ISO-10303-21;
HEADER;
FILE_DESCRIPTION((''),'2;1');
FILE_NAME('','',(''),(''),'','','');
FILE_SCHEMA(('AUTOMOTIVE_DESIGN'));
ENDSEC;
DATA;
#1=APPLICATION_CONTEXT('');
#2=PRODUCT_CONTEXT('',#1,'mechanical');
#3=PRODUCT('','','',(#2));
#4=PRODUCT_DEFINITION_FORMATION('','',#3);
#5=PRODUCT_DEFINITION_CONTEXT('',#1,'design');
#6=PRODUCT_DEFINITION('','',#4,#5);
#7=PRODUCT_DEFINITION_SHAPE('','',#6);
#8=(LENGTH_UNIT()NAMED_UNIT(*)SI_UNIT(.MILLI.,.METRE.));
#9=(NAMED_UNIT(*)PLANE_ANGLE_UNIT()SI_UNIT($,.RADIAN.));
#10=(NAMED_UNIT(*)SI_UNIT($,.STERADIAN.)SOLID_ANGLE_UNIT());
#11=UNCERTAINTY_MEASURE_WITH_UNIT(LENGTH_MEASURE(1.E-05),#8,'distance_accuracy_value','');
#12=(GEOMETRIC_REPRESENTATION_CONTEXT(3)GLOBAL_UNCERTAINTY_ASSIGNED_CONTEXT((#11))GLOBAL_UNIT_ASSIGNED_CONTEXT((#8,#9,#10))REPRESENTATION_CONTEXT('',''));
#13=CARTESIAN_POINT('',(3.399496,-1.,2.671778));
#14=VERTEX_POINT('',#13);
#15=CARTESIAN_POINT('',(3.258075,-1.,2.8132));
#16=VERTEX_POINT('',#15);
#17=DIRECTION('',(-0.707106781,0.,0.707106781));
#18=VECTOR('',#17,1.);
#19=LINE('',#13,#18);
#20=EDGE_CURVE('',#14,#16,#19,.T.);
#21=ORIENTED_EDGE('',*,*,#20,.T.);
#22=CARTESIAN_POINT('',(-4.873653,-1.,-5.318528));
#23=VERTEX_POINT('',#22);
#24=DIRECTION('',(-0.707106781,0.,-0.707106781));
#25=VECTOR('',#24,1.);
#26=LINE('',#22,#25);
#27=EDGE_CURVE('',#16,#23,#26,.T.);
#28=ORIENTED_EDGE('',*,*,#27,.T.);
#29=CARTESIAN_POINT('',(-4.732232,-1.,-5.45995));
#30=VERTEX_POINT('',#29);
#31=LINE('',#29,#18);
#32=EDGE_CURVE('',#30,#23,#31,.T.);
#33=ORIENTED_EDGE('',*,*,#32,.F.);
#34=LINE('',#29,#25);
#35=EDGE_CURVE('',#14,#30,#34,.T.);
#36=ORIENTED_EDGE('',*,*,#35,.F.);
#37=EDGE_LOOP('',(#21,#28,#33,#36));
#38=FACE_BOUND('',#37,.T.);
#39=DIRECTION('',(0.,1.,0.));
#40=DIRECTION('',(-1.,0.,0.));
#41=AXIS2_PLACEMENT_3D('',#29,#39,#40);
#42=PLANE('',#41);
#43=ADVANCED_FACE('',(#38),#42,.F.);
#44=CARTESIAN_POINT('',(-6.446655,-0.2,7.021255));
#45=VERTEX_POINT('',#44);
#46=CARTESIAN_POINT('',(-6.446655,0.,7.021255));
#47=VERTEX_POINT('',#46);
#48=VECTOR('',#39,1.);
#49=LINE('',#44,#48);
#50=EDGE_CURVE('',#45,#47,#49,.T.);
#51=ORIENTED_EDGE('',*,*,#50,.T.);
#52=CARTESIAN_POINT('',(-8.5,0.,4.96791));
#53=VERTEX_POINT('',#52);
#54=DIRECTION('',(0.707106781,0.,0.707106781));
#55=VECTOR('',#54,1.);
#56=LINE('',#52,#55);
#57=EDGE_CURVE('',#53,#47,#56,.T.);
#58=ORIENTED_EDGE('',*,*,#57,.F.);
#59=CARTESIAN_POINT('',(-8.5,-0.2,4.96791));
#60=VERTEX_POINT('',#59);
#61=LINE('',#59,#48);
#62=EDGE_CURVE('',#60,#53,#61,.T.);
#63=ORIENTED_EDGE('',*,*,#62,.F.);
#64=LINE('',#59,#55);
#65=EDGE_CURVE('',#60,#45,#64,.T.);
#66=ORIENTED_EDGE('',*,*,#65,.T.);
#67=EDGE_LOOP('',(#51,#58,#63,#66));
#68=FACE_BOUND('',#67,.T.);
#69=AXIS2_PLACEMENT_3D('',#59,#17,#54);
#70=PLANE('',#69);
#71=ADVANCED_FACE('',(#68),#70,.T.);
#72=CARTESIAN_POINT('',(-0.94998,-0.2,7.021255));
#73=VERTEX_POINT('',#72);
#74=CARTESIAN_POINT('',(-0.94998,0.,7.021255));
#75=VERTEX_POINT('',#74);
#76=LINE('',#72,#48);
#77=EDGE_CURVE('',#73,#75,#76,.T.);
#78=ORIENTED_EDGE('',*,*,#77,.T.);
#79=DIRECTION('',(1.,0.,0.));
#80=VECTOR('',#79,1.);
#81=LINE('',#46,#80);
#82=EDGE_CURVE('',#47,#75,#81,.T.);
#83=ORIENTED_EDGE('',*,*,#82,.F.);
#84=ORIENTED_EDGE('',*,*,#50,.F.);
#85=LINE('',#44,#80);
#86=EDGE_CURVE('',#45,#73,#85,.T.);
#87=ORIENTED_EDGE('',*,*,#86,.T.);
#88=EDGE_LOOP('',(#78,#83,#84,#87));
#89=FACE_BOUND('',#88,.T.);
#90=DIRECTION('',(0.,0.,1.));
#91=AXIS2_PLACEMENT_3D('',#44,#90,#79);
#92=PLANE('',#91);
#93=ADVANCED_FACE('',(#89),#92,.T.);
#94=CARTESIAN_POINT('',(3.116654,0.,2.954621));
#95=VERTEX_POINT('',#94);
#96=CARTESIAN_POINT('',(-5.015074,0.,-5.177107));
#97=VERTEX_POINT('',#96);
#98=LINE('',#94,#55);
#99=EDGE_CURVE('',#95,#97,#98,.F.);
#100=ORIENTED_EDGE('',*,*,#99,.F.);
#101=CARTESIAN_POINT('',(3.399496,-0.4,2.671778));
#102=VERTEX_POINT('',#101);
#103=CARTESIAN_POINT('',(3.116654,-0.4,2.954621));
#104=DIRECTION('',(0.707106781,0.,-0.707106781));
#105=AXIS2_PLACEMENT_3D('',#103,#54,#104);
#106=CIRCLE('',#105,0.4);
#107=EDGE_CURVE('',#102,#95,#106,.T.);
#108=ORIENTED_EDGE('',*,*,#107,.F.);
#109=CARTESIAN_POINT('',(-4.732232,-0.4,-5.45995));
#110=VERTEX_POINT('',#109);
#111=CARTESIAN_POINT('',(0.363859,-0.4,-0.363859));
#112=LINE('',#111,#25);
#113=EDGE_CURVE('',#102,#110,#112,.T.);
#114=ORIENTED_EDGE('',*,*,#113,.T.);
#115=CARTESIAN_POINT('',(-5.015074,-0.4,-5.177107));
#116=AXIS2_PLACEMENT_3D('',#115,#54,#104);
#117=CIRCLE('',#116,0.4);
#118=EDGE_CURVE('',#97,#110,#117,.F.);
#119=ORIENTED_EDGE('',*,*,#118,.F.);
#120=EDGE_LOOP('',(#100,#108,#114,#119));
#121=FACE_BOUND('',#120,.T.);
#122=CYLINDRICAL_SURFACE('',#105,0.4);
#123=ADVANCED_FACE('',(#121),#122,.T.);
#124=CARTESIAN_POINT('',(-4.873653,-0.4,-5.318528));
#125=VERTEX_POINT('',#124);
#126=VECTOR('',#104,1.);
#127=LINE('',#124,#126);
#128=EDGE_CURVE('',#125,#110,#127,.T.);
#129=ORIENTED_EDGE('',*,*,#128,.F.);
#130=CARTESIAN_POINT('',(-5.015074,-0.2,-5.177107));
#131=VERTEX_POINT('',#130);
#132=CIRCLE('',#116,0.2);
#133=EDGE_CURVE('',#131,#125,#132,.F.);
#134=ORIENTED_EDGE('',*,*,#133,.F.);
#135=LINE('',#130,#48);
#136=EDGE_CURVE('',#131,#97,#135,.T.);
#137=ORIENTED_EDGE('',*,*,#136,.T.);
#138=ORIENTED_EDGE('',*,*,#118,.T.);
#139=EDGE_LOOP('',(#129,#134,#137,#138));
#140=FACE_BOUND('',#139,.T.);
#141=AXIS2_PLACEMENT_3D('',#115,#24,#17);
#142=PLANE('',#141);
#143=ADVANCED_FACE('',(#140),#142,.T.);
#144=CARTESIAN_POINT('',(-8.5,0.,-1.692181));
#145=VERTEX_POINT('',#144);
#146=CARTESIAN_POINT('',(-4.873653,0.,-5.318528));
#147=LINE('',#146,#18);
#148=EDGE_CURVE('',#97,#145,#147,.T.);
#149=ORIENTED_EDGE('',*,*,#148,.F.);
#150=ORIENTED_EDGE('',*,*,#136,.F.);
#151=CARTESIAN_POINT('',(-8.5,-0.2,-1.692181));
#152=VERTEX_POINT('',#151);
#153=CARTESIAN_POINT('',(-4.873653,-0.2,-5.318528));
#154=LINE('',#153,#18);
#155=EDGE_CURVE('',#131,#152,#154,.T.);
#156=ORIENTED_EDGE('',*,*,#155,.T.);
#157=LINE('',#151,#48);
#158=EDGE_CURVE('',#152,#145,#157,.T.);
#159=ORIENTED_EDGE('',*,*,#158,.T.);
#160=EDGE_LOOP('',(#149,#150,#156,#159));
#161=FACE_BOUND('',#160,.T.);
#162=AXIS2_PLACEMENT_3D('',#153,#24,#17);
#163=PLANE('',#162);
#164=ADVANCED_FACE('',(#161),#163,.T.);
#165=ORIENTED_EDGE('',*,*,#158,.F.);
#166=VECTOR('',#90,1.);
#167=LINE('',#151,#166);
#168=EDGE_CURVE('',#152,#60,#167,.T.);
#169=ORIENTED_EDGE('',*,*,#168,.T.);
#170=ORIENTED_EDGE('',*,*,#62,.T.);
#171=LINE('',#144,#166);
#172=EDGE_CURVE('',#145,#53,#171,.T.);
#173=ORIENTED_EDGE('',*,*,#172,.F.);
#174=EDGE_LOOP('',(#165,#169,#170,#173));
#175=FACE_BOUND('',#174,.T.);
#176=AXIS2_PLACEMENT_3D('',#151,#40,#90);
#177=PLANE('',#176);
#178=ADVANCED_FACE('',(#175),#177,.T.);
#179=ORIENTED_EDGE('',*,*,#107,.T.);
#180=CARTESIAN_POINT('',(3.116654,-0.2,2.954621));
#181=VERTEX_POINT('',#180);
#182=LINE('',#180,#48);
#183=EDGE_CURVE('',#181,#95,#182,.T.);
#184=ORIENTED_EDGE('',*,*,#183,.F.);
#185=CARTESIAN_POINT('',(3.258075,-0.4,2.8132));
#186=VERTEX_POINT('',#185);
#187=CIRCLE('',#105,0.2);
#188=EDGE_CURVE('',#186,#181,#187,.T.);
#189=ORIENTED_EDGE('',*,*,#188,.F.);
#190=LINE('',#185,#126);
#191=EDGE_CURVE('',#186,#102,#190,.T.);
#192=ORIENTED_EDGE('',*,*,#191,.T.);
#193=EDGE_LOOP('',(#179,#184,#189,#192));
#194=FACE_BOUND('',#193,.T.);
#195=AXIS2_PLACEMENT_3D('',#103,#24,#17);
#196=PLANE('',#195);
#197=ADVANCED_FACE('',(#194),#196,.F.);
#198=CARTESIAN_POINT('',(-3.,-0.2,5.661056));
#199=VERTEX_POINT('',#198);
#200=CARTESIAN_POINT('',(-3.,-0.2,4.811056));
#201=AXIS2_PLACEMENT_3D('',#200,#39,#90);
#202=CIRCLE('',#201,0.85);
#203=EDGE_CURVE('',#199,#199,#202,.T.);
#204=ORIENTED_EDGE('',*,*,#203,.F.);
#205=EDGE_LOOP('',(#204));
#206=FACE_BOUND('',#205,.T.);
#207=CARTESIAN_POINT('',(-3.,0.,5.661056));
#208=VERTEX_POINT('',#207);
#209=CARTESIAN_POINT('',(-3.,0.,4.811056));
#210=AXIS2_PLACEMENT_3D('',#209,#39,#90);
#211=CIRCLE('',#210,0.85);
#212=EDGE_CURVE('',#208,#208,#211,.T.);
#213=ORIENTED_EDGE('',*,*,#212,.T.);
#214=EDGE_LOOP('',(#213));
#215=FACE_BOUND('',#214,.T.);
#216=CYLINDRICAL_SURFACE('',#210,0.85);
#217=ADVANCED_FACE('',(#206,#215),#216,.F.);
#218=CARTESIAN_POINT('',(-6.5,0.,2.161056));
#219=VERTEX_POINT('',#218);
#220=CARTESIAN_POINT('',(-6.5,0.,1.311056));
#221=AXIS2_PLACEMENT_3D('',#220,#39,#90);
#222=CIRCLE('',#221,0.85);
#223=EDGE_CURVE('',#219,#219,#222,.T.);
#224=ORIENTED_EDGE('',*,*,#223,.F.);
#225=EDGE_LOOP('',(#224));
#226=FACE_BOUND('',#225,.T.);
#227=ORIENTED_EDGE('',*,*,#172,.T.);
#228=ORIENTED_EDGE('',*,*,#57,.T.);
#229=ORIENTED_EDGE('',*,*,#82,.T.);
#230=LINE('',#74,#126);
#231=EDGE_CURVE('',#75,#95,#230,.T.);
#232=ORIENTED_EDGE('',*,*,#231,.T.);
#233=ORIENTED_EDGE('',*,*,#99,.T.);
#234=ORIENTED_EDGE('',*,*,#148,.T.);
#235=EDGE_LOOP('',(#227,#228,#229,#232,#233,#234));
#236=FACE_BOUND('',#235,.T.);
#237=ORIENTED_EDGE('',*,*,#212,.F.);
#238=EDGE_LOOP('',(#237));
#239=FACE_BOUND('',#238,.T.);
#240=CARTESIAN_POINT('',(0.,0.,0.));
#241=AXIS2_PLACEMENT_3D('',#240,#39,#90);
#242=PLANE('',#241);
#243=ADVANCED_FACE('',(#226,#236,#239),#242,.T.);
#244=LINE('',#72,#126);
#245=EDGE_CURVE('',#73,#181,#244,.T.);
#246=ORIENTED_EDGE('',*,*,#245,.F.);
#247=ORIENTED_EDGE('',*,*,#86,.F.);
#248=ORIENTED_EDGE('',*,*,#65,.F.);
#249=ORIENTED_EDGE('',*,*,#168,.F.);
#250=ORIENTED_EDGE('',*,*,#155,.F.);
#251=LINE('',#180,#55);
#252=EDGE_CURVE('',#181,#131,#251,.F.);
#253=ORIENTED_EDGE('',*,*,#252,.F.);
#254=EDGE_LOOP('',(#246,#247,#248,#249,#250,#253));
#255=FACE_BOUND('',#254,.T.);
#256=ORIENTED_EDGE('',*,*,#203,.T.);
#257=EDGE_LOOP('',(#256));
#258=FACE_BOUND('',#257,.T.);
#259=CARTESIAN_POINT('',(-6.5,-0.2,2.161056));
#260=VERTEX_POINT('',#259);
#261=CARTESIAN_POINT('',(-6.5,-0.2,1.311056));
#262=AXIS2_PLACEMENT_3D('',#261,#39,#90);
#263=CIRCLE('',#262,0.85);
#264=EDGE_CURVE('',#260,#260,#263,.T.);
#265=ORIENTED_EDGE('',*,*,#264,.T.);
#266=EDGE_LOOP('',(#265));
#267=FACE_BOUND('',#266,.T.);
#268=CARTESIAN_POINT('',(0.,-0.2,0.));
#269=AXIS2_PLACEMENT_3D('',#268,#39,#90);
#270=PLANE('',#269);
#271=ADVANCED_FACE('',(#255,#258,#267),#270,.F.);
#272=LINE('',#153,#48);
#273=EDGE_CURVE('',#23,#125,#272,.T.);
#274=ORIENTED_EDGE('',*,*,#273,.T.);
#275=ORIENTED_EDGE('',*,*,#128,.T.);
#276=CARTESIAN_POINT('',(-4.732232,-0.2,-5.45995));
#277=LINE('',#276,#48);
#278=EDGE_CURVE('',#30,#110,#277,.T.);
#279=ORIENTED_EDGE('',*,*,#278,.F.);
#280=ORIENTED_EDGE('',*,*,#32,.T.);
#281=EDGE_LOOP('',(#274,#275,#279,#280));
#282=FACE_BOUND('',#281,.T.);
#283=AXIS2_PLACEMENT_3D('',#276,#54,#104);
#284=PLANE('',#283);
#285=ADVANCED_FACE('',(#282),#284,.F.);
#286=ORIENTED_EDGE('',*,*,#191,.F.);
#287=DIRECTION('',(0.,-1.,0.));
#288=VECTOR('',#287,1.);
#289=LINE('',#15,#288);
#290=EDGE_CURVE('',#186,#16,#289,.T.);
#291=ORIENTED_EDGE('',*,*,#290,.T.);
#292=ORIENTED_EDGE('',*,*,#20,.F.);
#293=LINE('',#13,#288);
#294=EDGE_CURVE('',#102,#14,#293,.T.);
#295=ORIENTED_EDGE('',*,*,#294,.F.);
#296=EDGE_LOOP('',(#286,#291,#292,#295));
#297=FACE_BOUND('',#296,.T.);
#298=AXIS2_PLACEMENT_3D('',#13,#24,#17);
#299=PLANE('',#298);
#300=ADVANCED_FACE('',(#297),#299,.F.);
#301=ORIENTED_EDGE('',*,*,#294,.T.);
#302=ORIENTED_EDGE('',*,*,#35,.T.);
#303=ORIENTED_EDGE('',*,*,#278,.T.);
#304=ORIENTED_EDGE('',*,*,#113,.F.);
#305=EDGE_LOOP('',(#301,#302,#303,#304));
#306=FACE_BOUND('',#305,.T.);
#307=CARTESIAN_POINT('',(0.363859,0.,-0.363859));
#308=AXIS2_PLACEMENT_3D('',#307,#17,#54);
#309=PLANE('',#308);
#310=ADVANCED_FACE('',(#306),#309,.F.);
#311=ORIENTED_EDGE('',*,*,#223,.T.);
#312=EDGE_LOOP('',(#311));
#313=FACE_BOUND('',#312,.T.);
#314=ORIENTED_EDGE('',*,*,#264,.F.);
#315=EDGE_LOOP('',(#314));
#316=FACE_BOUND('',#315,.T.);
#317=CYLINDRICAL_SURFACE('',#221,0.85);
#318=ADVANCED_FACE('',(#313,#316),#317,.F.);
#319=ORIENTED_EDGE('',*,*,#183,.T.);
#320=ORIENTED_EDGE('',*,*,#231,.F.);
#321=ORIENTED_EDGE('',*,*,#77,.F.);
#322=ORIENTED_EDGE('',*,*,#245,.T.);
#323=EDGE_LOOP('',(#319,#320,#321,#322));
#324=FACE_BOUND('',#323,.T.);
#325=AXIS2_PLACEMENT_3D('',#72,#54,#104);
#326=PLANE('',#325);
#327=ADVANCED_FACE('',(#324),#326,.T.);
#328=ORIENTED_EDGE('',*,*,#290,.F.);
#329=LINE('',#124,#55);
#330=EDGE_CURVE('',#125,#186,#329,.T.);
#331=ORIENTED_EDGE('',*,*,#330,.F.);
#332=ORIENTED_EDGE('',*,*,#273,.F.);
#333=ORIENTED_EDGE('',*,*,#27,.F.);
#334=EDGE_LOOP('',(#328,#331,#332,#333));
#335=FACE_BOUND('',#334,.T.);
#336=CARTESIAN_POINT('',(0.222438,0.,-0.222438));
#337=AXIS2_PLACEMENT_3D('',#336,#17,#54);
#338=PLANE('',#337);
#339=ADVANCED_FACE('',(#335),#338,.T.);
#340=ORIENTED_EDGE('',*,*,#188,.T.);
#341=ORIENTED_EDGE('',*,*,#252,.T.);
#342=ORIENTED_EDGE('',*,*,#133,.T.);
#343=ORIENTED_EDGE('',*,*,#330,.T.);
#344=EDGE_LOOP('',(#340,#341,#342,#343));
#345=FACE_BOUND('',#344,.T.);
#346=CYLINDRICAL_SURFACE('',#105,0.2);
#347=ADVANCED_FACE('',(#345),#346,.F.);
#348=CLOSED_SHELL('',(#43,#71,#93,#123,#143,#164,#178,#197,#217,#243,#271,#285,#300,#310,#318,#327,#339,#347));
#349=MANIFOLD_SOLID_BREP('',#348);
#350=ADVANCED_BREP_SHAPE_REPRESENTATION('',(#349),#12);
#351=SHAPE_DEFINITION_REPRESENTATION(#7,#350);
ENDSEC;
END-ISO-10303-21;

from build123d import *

# Parameters (mm, degrees)
BASE_FLANGE1_DEPTH           = 0.2
EDGE_FLANGE1_STRIP_W         = 1.2
EDGE_FLANGE1_STRIP_H         = 0.2
EDGE_FLANGE1_STRIP_CUT_DEPTH = 11.5
EDGE_FLANGE1_DEPTH           = 11.5
F_1_7_1_7_DIAMETER_HOLE1_D   = 1.7


# Sheet-metal steps are written as plain solids
with BuildPart() as part:
    # Sketch1 → Base-Flange1 (new body)
    with BuildSketch(Plane(origin=(0, 0, 0), x_dir=(1, 0, 0), z_dir=(0, 1, 0))):
        Polygon((-4.873652989, 5.318528304), (-8.5, 1.692181293), (-8.5, -4.967910087), (-6.446655485, -7.021254602), (-0.949979928, -7.021254602), (3.258074995, -2.813199679), align=None)
    extrude(amount=-BASE_FLANGE1_DEPTH)

    # Edge-Flange1 strip (across the edge) → Edge-Flange1 strip cut (cut)
    with BuildSketch(Plane(origin=(-4.873652989, -0.2, -5.318528304), x_dir=(-0.7071067811865558, -3.4914813388431334e-15, 0.7071067811865392), z_dir=(0.7071067811865392, 0, 0.7071067811865558))):
        with Locations((-0.4, -0.1)):
            Rectangle(EDGE_FLANGE1_STRIP_W, EDGE_FLANGE1_STRIP_H)
    extrude(amount=EDGE_FLANGE1_STRIP_CUT_DEPTH, mode=Mode.SUBTRACT)

    # Edge-Flange1 section (across the edge) → Edge-Flange1 (add)
    with BuildSketch(Plane(origin=(-4.873652989, -0.2, -5.318528304), x_dir=(-0.7071067811865558, -3.4914813388431334e-15, 0.7071067811865392), z_dir=(0.7071067811865392, 0, 0.7071067811865558))):
        with BuildLine():
            Line((-0.2, 0.2), (-0.2, 0.8))
            Line((-0.2, 0.8), (0, 0.8))
            Line((0, 0.8), (0, 0.2))
            ThreePointArc((0, 0.2), (0.058578644, 0.058578644), (0.2, 0))
            Line((0.2, 0), (0.2, -0.2))
            ThreePointArc((0.2, -0.2), (-0.082842712, -0.082842712), (-0.2, 0.2))
        make_face()
    extrude(amount=EDGE_FLANGE1_DEPTH)

    # Ø1.7 (1.7) Diameter Hole1 (through all)
    with Locations(Plane(origin=(0, 0, 0), x_dir=(1, 0, 0), z_dir=(0, 1, 0))):
        with Locations((-6.5, -1.311055838), (-3, -4.811055838)):
            Hole(F_1_7_1_7_DIAMETER_HOLE1_D / 2)


solid = part.part
